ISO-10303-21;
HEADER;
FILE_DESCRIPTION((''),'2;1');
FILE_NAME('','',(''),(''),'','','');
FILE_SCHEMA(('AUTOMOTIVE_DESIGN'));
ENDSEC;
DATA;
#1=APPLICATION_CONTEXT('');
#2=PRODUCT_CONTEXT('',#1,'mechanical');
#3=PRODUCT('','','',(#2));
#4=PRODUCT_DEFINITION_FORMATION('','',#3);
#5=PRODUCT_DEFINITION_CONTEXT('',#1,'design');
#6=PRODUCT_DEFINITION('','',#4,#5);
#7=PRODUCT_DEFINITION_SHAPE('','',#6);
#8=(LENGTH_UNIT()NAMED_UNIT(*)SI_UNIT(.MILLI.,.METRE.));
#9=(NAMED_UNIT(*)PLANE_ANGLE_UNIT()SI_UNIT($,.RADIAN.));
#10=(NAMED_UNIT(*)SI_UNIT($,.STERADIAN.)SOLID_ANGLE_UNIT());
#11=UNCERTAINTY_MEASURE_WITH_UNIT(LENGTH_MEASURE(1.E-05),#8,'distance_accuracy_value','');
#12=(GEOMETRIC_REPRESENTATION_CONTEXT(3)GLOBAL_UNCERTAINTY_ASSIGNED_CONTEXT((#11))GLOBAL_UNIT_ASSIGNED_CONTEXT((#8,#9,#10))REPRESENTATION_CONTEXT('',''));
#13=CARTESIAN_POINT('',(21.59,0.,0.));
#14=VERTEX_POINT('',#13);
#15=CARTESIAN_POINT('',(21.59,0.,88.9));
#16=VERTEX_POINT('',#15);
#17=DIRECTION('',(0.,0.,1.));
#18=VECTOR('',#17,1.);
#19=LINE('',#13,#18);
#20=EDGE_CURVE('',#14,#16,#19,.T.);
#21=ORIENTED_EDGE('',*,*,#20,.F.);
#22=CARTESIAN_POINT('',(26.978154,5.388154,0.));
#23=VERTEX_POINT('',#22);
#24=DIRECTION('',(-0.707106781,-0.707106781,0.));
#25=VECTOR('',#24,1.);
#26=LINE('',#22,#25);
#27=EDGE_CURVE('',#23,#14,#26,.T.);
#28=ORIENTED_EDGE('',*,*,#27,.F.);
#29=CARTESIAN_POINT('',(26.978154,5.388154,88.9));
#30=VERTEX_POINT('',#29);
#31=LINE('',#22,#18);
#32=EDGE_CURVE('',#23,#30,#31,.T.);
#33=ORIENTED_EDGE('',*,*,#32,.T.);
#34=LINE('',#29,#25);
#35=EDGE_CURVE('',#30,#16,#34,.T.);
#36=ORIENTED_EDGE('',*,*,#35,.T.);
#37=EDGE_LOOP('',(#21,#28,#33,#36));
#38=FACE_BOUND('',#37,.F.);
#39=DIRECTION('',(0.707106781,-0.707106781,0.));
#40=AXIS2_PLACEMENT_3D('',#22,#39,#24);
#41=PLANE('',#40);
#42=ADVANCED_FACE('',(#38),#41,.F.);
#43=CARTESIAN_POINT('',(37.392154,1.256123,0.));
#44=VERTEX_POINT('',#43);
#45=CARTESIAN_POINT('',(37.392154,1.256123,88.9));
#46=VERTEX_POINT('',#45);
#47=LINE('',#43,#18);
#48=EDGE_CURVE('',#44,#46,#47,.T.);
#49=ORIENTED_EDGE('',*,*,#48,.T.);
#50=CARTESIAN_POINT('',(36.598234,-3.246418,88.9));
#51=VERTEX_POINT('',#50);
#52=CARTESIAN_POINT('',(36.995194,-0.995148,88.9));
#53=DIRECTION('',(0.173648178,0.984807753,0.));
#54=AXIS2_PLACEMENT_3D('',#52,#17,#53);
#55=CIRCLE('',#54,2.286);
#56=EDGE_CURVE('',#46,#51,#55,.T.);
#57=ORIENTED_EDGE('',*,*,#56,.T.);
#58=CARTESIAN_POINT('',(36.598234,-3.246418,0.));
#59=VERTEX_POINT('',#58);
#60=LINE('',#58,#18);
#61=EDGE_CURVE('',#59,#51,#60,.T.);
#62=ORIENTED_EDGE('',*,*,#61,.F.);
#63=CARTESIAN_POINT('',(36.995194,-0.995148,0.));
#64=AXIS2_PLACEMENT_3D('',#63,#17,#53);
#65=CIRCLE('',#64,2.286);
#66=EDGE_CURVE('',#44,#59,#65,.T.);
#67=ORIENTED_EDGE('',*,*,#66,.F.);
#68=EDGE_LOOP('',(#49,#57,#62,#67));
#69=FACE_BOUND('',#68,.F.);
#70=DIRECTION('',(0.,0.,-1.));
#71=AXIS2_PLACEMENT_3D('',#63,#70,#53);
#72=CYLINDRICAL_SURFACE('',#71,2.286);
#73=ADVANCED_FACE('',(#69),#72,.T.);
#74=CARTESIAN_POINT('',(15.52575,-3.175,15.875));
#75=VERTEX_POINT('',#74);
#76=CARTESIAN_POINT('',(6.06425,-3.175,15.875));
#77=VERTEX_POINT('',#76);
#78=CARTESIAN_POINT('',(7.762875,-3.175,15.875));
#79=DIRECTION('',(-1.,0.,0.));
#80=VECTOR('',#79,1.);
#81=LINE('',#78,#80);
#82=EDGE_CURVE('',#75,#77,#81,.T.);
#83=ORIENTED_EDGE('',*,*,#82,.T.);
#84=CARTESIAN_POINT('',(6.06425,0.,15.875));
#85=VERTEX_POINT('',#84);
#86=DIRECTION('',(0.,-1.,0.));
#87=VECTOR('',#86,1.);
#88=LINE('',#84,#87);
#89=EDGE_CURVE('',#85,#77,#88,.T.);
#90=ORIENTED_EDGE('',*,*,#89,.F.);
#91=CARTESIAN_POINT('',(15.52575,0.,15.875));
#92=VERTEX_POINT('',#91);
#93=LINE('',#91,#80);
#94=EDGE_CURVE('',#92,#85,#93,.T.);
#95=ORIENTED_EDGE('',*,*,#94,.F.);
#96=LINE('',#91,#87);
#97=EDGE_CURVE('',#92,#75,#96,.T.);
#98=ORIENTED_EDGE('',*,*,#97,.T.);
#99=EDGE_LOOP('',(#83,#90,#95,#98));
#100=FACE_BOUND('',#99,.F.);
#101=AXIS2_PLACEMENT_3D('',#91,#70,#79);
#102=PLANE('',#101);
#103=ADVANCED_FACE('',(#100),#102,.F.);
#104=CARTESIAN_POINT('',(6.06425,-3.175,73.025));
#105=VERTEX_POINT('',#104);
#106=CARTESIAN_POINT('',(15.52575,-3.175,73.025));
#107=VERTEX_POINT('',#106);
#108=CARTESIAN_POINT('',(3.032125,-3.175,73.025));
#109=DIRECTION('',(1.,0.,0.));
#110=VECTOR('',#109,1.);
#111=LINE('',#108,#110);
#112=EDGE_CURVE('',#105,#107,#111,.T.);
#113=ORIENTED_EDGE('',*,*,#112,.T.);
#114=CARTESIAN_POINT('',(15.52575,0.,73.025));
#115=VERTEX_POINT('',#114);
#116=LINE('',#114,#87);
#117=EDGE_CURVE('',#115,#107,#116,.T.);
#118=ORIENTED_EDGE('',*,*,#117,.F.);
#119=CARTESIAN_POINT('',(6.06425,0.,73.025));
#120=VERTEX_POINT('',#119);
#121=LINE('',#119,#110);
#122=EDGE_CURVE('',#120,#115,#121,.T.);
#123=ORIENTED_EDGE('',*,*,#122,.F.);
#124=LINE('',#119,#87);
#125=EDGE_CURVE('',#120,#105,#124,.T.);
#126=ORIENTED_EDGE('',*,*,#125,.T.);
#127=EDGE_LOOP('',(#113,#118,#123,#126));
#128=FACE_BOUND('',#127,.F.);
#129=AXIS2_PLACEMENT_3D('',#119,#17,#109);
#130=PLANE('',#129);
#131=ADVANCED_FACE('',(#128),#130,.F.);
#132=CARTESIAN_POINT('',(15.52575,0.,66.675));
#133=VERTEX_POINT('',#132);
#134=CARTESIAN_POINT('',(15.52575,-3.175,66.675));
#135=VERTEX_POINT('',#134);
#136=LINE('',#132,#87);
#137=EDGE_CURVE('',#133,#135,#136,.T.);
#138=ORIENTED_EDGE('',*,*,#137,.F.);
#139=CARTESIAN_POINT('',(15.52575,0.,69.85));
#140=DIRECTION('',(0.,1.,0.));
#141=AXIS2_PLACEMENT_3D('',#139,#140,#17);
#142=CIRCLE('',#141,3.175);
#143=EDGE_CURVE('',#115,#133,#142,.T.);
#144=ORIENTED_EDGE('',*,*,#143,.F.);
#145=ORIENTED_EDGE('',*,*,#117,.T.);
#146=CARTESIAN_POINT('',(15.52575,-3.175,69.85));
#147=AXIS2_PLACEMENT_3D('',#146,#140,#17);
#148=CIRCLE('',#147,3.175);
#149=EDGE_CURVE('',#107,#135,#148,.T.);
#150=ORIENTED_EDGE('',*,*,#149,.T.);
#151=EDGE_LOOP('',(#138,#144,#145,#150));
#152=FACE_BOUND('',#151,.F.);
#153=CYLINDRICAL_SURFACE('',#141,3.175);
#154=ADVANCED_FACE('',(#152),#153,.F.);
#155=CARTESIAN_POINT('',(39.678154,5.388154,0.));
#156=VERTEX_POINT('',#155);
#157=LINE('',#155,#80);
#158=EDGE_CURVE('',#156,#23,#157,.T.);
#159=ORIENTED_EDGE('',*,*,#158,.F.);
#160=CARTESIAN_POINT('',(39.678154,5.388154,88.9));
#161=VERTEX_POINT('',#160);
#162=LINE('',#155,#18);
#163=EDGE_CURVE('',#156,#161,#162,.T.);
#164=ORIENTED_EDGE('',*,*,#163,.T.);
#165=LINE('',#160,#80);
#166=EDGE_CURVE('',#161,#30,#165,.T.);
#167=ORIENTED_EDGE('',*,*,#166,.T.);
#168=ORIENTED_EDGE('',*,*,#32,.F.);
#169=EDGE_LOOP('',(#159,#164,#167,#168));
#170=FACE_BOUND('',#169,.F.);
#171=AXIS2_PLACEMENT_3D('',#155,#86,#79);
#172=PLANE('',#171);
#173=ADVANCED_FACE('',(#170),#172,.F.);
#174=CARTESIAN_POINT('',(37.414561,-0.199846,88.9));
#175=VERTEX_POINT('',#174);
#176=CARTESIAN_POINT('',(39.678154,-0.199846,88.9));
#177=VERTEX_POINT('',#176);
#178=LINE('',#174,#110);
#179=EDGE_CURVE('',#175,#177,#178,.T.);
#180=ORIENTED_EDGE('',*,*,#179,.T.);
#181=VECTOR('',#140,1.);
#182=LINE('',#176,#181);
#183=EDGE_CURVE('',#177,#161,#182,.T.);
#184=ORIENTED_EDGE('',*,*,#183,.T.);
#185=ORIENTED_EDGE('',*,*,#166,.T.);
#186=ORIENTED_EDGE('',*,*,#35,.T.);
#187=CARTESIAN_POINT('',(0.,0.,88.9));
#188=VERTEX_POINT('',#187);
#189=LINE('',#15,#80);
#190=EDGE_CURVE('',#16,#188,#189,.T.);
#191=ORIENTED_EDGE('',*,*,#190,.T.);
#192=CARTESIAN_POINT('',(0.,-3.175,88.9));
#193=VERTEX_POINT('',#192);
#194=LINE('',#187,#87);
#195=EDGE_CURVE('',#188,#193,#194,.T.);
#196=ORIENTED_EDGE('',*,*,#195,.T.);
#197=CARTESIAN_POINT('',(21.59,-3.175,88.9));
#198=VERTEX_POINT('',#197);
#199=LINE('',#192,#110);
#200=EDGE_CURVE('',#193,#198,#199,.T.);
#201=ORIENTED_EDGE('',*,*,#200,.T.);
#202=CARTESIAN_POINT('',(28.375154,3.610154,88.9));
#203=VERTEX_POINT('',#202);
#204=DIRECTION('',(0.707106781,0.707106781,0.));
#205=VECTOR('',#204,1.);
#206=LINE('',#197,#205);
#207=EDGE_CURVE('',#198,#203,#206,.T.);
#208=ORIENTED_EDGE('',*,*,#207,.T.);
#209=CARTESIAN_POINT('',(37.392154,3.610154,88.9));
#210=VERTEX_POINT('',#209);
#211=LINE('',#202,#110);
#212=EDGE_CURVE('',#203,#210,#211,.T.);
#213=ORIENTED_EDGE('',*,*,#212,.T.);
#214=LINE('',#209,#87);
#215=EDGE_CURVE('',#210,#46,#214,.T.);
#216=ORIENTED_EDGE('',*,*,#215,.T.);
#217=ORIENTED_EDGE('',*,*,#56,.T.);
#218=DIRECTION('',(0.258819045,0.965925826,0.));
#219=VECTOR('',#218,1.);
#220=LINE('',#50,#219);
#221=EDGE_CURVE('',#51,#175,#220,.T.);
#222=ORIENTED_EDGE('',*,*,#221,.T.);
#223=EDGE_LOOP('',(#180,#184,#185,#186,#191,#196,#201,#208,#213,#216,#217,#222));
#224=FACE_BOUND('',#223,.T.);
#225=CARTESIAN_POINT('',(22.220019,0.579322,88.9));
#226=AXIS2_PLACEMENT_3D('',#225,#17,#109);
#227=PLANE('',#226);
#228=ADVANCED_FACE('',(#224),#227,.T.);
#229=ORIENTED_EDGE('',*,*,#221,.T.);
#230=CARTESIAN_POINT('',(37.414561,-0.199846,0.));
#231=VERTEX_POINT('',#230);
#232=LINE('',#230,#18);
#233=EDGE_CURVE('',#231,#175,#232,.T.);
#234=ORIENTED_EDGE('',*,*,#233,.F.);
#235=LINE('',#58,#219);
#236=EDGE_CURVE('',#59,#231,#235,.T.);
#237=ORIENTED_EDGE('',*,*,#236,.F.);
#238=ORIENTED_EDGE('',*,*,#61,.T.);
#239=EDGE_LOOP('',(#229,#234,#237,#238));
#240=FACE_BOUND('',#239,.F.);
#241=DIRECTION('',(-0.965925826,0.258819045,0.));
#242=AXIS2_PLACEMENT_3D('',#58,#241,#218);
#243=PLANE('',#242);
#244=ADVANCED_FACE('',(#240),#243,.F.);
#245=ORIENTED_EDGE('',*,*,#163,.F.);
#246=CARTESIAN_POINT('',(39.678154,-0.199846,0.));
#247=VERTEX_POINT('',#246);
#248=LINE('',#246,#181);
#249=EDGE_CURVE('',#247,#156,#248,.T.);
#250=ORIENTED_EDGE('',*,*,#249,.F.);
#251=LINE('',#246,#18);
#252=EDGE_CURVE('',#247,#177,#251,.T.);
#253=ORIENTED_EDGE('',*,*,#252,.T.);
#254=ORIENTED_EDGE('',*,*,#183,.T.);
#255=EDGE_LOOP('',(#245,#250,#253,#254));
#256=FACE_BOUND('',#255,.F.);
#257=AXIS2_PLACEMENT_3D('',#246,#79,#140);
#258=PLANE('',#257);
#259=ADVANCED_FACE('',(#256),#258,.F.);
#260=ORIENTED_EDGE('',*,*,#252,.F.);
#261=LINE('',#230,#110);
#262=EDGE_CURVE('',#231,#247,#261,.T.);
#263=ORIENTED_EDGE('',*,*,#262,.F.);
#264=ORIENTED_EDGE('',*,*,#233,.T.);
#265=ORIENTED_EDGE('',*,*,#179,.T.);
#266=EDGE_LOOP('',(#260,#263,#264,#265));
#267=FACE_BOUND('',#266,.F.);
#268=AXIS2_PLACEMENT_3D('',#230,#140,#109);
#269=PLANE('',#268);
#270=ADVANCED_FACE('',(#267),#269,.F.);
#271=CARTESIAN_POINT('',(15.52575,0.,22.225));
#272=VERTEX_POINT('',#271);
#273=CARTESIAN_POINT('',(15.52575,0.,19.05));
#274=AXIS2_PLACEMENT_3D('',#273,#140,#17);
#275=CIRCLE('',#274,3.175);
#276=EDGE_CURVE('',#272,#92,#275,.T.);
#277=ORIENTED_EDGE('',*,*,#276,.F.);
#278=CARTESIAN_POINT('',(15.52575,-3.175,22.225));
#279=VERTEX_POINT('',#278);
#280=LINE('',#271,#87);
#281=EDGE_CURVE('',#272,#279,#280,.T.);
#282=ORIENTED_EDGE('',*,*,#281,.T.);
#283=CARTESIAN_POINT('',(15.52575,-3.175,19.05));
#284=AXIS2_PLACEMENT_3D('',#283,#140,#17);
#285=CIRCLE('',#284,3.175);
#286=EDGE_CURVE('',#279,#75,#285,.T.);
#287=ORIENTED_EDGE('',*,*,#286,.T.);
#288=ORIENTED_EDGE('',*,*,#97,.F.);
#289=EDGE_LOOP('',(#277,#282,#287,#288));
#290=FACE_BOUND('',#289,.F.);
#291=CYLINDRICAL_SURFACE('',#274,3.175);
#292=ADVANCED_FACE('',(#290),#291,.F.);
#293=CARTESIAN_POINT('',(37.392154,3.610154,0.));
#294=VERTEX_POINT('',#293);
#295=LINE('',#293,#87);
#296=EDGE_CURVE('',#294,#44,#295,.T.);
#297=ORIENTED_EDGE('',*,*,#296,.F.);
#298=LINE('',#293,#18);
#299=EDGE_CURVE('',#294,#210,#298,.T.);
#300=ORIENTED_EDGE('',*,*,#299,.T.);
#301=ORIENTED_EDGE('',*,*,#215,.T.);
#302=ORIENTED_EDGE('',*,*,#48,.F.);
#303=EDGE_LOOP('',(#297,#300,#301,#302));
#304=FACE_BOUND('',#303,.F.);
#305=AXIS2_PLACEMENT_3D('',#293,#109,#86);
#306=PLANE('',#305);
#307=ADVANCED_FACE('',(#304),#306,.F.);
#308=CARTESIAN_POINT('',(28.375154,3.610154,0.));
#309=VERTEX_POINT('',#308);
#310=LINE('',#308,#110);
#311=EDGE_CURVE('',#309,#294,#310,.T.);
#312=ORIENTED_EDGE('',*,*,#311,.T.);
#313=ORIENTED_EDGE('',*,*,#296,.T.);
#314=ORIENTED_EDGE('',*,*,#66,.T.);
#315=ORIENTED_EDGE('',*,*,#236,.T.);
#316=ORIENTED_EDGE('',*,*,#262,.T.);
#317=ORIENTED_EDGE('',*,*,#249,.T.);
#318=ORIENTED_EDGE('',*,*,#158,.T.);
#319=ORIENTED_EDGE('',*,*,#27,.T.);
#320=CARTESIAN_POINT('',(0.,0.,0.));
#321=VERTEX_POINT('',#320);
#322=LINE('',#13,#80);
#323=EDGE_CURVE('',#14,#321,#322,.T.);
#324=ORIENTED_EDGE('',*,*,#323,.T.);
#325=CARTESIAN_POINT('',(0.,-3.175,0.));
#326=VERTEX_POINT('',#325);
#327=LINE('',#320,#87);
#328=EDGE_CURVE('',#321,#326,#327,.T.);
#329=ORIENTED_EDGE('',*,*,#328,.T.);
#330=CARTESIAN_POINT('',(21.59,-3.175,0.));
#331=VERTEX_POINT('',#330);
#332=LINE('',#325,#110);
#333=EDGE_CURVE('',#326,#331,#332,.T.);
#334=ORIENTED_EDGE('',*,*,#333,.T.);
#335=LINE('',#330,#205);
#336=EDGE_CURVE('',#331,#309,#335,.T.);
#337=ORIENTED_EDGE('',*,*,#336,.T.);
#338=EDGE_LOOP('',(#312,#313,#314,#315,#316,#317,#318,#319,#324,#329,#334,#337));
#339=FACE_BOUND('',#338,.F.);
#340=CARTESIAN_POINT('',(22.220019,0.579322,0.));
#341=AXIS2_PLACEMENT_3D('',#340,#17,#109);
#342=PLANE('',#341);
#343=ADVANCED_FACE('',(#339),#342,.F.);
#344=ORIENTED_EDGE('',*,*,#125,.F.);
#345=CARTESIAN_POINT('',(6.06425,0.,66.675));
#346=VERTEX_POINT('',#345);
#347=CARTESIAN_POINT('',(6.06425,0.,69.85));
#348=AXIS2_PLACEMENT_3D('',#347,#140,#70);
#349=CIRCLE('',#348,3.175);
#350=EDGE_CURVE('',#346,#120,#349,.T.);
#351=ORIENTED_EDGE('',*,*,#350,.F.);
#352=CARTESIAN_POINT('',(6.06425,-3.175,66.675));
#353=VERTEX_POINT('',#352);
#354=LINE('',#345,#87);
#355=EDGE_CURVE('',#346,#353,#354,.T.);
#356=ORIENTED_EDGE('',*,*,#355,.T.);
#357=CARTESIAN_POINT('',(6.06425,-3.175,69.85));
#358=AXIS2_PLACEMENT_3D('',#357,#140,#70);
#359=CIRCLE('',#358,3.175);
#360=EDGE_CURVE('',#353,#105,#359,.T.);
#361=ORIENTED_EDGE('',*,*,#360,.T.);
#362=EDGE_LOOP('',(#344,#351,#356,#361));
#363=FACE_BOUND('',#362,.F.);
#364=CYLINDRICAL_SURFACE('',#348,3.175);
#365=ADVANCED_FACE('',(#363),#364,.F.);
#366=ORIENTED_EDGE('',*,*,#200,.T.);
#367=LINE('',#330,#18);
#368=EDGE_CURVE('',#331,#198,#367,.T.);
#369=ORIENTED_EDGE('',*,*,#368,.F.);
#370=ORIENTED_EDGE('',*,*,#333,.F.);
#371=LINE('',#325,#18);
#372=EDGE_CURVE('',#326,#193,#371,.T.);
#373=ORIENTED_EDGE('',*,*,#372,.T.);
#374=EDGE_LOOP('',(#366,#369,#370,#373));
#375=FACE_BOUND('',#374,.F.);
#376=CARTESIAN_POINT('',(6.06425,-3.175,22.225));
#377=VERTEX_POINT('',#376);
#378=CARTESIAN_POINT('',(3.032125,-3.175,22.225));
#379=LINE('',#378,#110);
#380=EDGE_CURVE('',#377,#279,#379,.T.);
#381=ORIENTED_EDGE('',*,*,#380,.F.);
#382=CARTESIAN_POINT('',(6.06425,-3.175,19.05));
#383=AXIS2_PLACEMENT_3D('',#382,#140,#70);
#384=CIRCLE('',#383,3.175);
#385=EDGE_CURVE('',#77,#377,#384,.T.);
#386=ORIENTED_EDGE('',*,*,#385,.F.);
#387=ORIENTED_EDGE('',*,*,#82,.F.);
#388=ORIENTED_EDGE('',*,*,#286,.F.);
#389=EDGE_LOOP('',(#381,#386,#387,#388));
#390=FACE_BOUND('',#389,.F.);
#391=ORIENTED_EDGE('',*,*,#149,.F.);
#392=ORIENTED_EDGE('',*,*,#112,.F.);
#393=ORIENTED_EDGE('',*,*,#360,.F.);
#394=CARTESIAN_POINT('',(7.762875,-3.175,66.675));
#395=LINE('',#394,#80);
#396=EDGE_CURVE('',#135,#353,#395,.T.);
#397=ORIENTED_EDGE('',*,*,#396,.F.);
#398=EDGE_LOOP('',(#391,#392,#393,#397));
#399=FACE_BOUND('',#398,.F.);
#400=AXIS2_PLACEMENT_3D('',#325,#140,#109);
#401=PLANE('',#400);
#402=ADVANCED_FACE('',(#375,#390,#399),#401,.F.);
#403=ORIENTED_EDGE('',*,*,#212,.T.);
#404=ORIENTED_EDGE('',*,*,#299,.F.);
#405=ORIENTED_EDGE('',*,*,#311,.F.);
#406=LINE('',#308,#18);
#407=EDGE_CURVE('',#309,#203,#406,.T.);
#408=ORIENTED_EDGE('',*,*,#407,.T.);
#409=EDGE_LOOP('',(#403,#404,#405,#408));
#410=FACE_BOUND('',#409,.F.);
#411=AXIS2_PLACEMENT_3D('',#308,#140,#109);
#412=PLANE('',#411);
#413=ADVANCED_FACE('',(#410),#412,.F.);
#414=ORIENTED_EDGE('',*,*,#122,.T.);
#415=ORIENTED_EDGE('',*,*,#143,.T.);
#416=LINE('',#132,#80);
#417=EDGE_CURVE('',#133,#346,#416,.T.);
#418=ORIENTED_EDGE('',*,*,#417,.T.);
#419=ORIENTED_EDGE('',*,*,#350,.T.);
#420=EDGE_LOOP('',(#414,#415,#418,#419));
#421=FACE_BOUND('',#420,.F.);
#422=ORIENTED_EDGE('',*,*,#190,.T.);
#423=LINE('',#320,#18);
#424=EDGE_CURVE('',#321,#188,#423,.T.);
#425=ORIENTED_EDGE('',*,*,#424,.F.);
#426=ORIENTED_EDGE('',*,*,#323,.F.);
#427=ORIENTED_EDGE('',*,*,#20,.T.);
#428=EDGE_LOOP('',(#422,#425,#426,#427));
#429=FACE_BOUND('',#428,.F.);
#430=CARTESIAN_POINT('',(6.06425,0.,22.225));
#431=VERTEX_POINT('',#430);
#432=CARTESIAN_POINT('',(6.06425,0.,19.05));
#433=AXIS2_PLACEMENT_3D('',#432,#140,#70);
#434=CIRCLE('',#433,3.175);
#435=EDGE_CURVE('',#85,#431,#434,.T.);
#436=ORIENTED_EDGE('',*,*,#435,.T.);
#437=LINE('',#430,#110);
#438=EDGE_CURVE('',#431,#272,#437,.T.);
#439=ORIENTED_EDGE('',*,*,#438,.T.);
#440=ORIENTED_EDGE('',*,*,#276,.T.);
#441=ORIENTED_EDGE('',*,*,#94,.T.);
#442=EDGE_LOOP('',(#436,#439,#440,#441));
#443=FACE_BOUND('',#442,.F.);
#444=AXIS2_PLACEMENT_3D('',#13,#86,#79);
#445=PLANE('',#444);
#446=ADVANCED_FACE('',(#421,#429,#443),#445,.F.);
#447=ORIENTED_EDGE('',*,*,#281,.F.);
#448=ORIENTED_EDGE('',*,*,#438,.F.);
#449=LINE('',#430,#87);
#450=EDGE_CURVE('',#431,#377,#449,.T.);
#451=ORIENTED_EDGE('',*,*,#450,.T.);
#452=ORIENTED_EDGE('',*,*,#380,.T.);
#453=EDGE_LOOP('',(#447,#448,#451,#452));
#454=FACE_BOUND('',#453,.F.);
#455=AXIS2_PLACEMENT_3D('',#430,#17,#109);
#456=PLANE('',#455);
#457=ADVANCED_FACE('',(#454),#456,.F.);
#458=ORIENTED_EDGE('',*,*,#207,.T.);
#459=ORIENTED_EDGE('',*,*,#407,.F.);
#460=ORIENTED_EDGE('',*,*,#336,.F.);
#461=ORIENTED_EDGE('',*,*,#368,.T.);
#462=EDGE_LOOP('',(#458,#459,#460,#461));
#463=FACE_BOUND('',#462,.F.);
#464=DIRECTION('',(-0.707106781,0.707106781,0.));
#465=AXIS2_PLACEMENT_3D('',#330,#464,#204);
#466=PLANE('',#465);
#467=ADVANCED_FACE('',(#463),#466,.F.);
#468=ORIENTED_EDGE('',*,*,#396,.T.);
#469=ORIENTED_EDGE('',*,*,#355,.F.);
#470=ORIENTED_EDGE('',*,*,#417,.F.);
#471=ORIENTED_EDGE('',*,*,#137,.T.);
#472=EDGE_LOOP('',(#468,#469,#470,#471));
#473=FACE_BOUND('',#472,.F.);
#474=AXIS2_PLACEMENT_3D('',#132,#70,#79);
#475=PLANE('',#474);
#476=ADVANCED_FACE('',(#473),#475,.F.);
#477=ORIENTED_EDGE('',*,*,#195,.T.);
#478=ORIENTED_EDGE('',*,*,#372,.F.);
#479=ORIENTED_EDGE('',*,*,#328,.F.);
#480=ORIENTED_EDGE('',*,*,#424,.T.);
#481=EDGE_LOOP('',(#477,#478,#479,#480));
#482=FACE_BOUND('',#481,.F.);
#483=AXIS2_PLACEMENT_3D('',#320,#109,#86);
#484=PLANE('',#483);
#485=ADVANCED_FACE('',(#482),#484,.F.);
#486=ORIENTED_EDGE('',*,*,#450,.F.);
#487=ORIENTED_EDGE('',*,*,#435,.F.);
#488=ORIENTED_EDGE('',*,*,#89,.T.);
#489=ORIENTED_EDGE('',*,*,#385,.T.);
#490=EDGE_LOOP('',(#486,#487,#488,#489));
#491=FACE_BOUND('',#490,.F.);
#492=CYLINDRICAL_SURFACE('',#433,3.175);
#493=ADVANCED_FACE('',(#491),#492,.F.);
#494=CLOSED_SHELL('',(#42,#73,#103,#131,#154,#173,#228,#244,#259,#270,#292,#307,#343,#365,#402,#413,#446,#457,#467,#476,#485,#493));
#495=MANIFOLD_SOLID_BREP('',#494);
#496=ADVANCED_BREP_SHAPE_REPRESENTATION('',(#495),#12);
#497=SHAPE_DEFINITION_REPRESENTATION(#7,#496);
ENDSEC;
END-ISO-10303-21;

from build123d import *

# Parameters (mm, degrees)
F1_DEPTH = 88.9
F3_DEPTH = 25.4
F4_ANGLE = -90


with BuildPart() as f1:
    # F0 (on Front) → F1 (new body)
    with BuildSketch(Plane.XZ):
        Polygon((21.59, 0), (0, 0), (0, -3.175), (21.59, -3.175), (28.3751536726, 3.6101536726), (37.3921536726, 3.6101536726), (37.3921536726, 1.256122898), (36.5982342043, -3.2464181487), (37.4145606636, -0.1998463274), (39.6781536726, -0.1998463274), (39.6781536726, 5.3881536726), (26.9781536726, 5.3881536726), align=None)
        with BuildLine():
            Line((36.5982342043, -3.2464181487), (37.3921536726, 1.256122898))
            ThreePointArc((37.3921536726, 1.256122898), (34.7439234151, -0.5981878912), (36.5982342043, -3.2464181487))
        make_face()
    extrude(amount=F1_DEPTH)

    # F2 (on face) → F3 (cut)
    with BuildSketch(Plane.XY):
        with BuildLine():
            Line((10.795, -22.225), (10.795, -15.875))
            Line((10.795, -15.875), (6.06425, -15.875))
            ThreePointArc((6.06425, -15.875), (2.88925, -19.05), (6.06425, -22.225))
            Line((6.06425, -22.225), (10.795, -22.225))
        make_face()
        with BuildLine():
            Line((15.52575, -15.875), (10.795, -15.875))
            Line((10.795, -15.875), (10.795, -22.225))
            Line((10.795, -22.225), (15.52575, -22.225))
            ThreePointArc((15.52575, -22.225), (18.70075, -19.05), (15.52575, -15.875))
        make_face()
        with BuildLine():
            Line((10.795, -73.025), (10.795, -66.675))
            Line((10.795, -66.675), (6.06425, -66.675))
            ThreePointArc((6.06425, -66.675), (2.88925, -69.85), (6.06425, -73.025))
            Line((6.06425, -73.025), (10.795, -73.025))
        make_face()
        with BuildLine():
            Line((15.52575, -66.675), (10.795, -66.675))
            Line((10.795, -66.675), (10.795, -73.025))
            Line((10.795, -73.025), (15.52575, -73.025))
            ThreePointArc((15.52575, -73.025), (18.70075, -69.85), (15.52575, -66.675))
        make_face()
    extrude(amount=-F3_DEPTH, mode=Mode.SUBTRACT)


with BuildPart() as f1_1:
    # F4: moved
    add(f1.part.rotate(Axis((10.795, 0, 0), (1, 0, 0)), F4_ANGLE))


solid = f1_1.part
